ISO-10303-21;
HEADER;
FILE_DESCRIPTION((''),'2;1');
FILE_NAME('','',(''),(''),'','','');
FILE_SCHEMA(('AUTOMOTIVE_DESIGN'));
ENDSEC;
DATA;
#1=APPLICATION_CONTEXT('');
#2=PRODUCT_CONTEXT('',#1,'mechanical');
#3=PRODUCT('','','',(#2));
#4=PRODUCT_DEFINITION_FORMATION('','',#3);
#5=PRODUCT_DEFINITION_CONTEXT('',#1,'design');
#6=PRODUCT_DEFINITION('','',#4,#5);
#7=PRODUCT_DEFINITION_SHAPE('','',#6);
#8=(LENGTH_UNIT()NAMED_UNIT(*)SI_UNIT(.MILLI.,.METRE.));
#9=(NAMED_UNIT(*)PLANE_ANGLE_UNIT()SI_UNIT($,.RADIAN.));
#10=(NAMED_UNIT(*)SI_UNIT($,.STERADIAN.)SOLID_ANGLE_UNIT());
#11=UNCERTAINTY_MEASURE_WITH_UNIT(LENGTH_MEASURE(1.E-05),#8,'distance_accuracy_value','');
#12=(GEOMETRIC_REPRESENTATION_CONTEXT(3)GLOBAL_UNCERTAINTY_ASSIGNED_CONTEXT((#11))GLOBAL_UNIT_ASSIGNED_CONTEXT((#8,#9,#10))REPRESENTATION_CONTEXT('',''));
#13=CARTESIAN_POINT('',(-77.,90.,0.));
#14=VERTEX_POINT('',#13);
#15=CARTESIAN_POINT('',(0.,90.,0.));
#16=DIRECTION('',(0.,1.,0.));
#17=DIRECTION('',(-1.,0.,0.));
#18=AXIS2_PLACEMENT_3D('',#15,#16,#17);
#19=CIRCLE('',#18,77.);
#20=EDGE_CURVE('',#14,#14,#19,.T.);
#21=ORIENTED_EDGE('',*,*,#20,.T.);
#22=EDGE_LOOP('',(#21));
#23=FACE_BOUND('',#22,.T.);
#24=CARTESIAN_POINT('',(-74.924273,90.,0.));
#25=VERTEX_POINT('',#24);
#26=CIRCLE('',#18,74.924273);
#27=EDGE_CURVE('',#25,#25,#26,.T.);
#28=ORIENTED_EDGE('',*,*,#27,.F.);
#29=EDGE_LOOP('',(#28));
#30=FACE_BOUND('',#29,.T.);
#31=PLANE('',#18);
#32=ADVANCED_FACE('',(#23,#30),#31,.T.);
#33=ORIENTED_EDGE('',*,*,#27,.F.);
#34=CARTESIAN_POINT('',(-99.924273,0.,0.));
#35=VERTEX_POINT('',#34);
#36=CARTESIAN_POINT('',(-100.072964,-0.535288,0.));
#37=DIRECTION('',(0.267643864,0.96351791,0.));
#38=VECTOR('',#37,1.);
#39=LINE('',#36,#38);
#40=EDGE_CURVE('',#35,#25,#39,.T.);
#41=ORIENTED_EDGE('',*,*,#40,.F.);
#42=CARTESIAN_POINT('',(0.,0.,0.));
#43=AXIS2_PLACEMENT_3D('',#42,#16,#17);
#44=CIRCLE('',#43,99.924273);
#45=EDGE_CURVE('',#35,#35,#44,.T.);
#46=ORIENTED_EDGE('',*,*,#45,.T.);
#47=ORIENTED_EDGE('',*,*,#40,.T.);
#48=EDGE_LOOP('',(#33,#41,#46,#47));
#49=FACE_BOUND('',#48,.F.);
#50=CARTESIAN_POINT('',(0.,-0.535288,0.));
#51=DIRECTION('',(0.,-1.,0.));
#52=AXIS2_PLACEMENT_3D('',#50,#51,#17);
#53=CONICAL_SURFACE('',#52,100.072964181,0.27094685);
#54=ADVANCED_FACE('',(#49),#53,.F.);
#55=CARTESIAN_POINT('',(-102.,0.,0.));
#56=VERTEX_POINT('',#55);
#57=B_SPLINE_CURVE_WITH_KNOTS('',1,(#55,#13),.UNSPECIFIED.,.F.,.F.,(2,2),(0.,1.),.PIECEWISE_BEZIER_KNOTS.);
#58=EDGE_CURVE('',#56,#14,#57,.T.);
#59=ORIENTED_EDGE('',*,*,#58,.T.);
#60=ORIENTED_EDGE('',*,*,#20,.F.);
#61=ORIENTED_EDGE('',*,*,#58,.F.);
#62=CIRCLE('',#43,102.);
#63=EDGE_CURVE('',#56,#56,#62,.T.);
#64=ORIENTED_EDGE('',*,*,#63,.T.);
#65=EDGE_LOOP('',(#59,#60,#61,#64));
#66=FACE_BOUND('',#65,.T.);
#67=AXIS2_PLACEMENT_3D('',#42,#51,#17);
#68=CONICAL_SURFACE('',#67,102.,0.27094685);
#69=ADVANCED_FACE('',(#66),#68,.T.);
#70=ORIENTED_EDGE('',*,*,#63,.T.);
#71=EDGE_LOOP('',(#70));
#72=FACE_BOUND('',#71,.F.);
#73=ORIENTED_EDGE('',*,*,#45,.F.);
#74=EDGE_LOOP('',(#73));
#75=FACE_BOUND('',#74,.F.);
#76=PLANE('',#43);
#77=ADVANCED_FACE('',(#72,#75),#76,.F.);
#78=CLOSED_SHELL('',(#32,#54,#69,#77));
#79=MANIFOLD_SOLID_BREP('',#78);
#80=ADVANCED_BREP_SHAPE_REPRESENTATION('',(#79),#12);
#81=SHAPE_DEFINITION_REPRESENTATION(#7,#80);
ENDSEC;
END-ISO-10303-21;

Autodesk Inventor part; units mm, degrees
ref_plane "YZ Plane" through (0, 0, 0) normal (1, 0, 0) x (0, 1, 0)
ref_plane "XY Plane" through (0, 0, 0) normal (0, 0, 1) x (1, 0, 0)
sketch "Szkic6" plane through (0, 0, 0) normal (0, 1, 0) x (-1, 0, 0)
  circle A0 centre (0, 0) radius 102
  dimension "d33" = 204
ref_plane "Płaszczyzna konstrukcyjna1" through (0, 90, 0) normal (0, 1, 0) x (-1, 0, 0)
sketch "Szkic7" plane through (0, 90, 0) normal (0, 1, 0) x (-1, 0, 0)
  circle A0 centre (0, 0) radius 77
  dimension "d35" = 154
loft "Wyciągnięcie złożone1" add profiles "Szkic6", "Szkic7"
shell "Skorupa1" thickness 2 removed faces 2 at (-16.3273, 90, 22.228) at (-23.2432, 0, 54.3964)
equation "\"d33\" = OD1"
equation "\"d35\" = OD2"
equation "\"d52\" = THK"
equation "\"SzerokośćGięciaPodcięcia\" = Grubość"
equation "\"RozmiarPodcięciaNarożnika\" = 4 * Grubość"
equation "\"PromieńPrzejścia\" = PromieńGięcia"
equation "\"Rozmiar_promienia_Jacobiego\" = PromieńGięcia"
equation "\"Wielk_odstępu\" = Grubość"
equation "\"d2\" = PromieńGięcia"
equation "\"d23\" = PromieńGięcia"
equation "\"OD1\" = 204"
equation "\"OD2\" = 154"
equation "\"THK\" = 2"
equation "\"Grubość\" = 1.5"
equation "\"PromieńGięcia\" = 3"
properties part number "Redukcja symetryczna Ø204x154x2 L=90" material "304"
